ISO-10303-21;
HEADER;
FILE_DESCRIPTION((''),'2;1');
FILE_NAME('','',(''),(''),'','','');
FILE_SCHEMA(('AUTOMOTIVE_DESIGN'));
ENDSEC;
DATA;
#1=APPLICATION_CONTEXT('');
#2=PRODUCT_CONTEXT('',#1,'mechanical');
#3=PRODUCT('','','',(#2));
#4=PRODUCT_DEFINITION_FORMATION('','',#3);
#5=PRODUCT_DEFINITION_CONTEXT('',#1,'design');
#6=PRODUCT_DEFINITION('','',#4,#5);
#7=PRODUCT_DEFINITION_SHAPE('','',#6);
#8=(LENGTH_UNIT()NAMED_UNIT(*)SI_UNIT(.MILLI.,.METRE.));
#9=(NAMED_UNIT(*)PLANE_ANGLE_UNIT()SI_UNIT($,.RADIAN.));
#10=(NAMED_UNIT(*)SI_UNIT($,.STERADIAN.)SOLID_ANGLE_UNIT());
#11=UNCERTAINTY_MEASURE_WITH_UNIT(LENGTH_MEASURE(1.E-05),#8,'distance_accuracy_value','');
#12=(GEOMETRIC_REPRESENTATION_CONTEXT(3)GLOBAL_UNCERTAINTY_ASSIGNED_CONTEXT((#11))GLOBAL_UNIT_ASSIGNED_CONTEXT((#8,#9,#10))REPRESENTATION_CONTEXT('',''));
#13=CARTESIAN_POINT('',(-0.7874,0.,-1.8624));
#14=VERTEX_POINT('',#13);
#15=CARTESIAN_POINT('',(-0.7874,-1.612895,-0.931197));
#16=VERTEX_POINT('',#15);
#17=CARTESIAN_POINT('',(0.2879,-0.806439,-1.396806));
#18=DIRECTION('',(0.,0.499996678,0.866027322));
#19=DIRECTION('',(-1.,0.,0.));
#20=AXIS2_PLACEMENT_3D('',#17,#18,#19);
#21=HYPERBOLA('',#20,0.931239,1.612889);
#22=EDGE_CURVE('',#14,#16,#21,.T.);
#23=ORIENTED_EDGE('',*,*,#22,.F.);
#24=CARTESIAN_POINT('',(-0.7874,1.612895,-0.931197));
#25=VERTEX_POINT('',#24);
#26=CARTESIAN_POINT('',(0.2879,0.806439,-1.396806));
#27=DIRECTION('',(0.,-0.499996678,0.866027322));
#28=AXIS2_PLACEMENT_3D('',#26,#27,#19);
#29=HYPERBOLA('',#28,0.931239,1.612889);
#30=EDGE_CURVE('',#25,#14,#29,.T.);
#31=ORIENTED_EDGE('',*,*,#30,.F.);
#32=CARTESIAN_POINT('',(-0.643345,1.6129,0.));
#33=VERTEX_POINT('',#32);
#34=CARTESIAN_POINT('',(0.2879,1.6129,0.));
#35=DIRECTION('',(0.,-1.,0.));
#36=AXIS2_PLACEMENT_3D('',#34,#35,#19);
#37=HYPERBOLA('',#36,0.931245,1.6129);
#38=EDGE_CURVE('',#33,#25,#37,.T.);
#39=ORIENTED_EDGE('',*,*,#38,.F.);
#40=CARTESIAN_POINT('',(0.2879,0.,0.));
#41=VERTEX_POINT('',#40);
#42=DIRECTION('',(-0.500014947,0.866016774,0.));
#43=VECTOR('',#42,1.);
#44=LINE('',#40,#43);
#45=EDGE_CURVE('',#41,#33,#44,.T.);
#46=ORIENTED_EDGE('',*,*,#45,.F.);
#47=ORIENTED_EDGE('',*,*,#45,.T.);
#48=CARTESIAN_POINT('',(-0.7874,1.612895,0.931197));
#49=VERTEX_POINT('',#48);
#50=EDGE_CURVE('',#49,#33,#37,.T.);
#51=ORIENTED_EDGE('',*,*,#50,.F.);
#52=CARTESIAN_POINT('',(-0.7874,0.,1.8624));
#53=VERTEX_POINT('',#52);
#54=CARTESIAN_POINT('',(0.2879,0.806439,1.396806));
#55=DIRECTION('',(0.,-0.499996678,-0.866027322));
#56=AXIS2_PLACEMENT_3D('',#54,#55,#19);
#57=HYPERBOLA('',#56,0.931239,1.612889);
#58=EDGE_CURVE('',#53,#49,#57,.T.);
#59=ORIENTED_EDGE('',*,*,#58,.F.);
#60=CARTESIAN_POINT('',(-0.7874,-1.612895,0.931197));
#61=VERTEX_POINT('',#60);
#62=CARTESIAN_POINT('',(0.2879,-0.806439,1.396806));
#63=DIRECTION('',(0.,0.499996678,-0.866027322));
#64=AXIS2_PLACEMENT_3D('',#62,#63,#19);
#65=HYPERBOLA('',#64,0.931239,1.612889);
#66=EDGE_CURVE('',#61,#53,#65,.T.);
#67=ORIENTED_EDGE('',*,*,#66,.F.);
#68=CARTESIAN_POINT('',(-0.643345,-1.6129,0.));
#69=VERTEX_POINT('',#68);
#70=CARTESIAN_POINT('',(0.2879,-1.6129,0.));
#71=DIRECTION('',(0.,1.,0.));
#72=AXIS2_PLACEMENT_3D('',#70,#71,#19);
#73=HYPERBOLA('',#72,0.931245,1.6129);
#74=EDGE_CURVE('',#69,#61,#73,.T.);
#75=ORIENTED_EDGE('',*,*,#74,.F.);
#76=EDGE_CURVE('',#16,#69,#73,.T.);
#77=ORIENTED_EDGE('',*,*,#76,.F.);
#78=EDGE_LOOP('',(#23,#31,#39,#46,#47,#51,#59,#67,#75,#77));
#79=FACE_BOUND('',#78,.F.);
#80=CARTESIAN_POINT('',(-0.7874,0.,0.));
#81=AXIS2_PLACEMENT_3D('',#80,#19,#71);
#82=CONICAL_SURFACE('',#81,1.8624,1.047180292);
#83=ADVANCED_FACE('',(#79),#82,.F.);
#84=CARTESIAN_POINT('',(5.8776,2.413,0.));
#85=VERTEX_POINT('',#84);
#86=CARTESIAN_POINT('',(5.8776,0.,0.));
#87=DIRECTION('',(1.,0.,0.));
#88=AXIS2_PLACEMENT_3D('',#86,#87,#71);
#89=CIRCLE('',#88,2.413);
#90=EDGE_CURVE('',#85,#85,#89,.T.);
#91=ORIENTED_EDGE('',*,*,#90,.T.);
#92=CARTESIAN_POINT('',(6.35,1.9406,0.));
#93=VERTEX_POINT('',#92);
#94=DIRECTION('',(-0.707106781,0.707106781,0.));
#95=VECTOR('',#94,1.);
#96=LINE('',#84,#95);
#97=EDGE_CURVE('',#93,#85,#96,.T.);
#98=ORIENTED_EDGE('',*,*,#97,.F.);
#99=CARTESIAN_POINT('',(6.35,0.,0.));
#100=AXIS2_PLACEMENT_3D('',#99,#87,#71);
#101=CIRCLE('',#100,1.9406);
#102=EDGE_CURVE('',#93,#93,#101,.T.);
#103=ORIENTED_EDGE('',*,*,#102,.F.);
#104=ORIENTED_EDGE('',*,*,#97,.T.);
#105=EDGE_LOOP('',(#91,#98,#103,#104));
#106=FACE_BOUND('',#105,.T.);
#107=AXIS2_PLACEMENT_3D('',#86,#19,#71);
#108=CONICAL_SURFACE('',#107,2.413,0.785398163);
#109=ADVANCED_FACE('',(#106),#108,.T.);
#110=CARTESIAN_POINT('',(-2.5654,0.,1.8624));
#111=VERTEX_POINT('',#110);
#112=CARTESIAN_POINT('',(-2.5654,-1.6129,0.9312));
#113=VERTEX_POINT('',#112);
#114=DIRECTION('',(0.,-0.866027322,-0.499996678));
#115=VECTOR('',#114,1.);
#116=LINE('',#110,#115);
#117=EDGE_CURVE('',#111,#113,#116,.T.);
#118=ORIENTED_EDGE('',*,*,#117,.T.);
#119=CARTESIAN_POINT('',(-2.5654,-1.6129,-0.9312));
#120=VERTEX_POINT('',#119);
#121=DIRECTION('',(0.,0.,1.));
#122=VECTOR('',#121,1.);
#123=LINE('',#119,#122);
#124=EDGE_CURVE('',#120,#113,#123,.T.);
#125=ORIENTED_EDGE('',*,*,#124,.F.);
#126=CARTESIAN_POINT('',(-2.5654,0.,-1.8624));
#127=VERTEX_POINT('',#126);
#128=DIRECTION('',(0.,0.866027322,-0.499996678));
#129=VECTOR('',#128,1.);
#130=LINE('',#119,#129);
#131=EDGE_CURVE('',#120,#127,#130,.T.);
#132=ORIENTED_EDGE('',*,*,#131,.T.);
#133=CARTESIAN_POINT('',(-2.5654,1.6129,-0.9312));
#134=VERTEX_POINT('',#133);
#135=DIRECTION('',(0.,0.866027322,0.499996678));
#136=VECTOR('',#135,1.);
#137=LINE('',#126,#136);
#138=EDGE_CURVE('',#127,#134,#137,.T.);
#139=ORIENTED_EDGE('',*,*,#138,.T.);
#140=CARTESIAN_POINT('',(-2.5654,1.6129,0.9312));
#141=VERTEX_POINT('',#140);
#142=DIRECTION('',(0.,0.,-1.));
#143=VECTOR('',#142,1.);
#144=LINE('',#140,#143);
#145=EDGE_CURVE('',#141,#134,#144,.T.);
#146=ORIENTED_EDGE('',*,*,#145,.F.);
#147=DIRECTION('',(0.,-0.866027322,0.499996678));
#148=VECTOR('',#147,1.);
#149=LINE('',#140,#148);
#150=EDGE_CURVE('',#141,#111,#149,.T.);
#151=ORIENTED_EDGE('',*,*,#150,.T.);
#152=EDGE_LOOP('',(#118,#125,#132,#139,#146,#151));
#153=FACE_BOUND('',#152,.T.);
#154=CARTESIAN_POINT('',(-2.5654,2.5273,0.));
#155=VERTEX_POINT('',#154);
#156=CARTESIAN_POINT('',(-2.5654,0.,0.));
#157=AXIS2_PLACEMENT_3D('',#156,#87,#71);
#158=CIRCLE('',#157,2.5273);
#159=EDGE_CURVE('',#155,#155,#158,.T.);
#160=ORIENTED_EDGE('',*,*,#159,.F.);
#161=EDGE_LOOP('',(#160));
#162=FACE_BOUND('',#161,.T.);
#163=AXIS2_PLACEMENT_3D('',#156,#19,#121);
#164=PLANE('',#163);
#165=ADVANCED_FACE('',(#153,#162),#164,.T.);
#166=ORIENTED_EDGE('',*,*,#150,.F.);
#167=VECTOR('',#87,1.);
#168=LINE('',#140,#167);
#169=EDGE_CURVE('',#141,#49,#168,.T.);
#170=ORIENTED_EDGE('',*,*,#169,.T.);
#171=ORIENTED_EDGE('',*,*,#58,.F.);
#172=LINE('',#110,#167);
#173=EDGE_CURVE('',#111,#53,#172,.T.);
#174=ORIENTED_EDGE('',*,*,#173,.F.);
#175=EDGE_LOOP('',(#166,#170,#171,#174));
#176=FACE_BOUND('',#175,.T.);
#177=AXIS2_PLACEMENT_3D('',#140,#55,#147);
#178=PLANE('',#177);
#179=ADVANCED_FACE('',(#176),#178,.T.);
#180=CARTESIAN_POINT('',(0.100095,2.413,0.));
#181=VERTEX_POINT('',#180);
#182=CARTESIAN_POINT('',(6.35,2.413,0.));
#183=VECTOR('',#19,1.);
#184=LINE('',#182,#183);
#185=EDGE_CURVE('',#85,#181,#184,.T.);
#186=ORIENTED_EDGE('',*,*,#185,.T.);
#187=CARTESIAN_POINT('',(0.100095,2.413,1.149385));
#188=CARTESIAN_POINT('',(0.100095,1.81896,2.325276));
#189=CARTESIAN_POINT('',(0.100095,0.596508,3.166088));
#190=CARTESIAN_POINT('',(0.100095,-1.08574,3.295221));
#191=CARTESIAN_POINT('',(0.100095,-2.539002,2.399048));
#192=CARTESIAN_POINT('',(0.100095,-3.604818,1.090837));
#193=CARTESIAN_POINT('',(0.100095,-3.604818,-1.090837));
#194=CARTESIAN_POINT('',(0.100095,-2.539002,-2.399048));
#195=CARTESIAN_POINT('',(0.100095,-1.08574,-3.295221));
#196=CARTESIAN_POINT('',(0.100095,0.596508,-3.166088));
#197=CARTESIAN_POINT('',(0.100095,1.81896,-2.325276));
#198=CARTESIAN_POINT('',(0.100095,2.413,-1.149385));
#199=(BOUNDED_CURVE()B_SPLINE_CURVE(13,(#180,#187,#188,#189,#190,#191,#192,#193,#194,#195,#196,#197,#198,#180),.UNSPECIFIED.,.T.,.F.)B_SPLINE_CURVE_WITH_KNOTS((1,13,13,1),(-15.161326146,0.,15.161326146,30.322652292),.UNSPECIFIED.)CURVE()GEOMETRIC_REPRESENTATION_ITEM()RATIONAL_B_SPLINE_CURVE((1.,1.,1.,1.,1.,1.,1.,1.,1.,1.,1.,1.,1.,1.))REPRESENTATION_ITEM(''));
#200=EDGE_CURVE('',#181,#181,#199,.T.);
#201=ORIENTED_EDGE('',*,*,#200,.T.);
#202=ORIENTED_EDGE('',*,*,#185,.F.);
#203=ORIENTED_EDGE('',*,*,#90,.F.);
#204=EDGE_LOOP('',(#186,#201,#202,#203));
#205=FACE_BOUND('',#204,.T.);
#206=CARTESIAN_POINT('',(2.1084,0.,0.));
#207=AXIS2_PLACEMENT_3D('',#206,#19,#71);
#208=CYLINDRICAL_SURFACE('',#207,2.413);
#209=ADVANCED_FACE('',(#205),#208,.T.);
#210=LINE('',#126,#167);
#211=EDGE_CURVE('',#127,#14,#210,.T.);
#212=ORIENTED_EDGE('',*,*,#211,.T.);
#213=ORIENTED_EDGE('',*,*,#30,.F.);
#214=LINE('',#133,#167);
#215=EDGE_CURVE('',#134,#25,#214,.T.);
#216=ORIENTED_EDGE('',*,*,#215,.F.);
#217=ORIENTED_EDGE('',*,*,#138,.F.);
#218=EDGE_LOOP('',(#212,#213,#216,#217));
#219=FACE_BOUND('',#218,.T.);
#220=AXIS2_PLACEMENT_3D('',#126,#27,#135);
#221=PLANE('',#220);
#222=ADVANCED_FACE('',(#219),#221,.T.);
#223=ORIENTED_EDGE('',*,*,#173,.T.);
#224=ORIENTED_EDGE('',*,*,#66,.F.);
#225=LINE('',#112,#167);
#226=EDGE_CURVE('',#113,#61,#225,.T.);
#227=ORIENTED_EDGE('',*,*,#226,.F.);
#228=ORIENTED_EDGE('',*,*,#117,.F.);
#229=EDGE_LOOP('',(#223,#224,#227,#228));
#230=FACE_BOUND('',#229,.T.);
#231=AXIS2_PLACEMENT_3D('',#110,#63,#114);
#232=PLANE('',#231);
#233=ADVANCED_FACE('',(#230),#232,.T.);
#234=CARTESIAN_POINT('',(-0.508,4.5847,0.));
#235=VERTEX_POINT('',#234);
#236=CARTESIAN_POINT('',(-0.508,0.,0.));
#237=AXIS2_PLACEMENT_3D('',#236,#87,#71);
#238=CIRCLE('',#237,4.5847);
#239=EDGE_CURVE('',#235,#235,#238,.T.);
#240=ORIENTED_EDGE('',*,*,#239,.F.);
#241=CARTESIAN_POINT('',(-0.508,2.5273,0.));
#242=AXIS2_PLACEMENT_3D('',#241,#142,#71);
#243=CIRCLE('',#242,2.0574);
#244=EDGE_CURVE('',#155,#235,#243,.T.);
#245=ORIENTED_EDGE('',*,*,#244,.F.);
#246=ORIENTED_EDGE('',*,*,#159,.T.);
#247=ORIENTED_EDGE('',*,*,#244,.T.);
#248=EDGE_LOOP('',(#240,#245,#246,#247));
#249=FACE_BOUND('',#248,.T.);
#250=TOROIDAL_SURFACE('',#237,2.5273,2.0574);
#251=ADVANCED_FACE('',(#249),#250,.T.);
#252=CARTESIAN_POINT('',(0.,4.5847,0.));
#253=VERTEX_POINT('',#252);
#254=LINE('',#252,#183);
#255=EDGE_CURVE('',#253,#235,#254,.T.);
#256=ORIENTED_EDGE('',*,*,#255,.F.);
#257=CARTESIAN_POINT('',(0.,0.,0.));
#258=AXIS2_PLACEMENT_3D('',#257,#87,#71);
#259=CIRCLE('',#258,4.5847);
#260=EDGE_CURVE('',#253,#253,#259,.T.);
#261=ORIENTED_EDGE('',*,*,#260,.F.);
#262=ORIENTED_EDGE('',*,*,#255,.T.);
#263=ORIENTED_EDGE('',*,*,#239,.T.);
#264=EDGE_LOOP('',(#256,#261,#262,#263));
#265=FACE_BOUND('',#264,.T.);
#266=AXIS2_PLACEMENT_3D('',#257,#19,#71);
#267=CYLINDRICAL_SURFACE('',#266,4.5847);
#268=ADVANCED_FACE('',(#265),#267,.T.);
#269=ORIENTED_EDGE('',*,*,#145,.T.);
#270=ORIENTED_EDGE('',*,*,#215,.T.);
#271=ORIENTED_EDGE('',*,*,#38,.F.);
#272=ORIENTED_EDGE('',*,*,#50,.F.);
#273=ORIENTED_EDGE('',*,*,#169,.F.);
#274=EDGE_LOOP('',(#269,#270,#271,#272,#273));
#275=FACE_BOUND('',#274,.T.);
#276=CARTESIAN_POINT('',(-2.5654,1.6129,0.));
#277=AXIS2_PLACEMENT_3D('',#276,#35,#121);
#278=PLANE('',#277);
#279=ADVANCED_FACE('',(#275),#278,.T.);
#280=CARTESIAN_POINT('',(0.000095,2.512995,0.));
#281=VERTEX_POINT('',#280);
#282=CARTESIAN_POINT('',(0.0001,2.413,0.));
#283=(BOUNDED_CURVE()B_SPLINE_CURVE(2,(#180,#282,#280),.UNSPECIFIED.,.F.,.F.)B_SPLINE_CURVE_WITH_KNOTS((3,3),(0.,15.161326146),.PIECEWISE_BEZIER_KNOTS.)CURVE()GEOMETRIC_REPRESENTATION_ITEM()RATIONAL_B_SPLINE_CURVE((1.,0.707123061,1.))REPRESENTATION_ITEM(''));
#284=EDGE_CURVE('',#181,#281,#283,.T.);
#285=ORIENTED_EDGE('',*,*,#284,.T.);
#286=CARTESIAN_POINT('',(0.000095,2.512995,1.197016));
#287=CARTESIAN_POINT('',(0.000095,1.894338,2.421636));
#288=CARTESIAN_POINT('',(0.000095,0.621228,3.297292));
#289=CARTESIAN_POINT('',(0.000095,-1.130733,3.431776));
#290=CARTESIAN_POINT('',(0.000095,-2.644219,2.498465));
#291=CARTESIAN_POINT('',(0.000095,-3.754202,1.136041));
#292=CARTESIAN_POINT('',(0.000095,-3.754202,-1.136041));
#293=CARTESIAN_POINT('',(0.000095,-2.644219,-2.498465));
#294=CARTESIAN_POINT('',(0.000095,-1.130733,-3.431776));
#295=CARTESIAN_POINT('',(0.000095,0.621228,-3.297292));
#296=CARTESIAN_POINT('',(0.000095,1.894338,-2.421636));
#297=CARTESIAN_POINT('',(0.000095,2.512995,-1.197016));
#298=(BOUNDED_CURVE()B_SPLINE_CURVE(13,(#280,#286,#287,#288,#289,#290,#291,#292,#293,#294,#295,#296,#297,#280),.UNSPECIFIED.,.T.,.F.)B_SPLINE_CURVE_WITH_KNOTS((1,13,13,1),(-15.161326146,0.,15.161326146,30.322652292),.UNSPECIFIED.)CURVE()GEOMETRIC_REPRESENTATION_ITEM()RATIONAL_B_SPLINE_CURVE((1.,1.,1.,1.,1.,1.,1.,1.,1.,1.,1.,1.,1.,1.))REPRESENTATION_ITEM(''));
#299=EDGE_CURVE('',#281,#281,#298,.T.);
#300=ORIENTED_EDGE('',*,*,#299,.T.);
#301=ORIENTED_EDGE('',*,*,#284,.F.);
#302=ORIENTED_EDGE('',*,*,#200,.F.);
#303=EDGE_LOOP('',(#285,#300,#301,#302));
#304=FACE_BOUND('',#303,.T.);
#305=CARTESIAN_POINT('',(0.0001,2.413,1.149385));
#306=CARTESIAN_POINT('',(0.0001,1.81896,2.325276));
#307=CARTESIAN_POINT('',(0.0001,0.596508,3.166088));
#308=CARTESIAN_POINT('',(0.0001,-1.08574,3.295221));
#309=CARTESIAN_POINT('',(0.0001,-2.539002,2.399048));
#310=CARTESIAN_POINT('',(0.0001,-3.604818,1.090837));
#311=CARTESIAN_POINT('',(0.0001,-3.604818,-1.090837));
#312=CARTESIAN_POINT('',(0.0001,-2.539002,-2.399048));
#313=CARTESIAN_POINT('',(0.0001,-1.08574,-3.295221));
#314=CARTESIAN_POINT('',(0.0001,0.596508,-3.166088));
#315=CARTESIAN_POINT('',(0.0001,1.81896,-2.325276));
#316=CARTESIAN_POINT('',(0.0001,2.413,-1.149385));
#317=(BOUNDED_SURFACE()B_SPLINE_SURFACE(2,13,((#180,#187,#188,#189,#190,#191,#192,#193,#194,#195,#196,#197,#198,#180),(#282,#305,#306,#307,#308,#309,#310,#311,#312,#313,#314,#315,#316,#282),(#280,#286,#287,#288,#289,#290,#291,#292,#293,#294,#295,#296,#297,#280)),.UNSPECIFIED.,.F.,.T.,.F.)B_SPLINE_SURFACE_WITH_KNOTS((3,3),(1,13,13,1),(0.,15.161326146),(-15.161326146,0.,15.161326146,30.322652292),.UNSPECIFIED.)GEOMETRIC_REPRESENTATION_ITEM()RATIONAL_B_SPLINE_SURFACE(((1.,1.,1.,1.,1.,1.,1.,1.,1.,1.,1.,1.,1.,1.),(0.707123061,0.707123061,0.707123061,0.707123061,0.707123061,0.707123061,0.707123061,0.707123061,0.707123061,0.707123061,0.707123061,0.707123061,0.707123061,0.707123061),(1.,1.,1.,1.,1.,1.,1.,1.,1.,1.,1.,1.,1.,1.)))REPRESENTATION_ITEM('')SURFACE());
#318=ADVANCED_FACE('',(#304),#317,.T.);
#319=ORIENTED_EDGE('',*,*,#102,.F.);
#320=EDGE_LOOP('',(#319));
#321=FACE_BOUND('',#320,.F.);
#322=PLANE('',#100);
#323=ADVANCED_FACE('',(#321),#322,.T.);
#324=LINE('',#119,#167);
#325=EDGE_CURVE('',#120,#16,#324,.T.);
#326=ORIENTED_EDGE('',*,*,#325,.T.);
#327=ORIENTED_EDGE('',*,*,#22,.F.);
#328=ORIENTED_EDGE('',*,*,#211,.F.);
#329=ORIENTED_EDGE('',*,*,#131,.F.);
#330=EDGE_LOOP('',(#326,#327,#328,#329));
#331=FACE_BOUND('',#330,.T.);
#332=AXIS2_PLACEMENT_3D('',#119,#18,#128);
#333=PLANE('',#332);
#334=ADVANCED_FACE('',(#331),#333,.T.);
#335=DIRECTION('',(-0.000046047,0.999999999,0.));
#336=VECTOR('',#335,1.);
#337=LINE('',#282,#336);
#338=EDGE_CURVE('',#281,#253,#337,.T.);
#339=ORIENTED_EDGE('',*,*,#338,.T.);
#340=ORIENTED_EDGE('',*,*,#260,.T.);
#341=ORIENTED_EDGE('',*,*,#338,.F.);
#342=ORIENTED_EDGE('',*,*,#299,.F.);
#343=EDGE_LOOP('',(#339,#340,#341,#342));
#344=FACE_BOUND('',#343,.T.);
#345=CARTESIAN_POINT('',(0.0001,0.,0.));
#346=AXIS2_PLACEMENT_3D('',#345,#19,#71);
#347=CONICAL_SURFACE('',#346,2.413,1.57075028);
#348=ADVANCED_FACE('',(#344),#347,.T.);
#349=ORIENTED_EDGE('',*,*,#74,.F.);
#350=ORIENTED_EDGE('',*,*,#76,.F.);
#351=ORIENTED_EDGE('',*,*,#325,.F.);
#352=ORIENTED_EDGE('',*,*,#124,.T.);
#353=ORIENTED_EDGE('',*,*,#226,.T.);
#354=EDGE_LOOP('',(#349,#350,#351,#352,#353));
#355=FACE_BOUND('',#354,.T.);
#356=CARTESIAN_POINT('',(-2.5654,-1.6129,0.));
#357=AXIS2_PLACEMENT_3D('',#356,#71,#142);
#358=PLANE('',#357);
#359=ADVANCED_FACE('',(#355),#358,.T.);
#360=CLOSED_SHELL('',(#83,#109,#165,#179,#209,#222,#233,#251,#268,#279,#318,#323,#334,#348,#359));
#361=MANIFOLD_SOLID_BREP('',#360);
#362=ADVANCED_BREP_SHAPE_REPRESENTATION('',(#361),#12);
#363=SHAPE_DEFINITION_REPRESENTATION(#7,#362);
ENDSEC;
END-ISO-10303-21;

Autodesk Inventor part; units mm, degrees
ref_plane "YZ Plane" through (0, 0, 0) normal (1, 0, 0) x (0, 1, 0)
ref_plane "XZ Plane" through (0, 0, 0) normal (0, 1, 0) x (-1, 0, 0)
sketch "Sketch1" plane through (0, 0, 0) normal (0, 0, 1) x (1, 0, 0)
  line L0 (0.2879, 0) -> (6.35, 0)
  line L1 (6.35, 0) -> (6.35, 2.413)
  line L2 (6.35, 2.413) -> (2.1084, 2.413)
  line L3 (2.1084, 2.413) -> (0.0001, 2.413)
  line L4 (0.0001, 2.413) -> (0, 2.413)
  line L5 (0, 2.413) -> (0, 4.5847)
  line L6 (0, 4.5847) -> (-2.5654, 4.5847)
  line L7 (-2.5654, 4.5847) -> (-2.5654, 1.8624)
  line L8 (-2.5654, 1.8624) -> (-0.7874, 1.8624)
  line L9 (-0.7874, 1.8624) -> (0.2879, 0)
  line L10 (-4.3485, 0) -> (8.1331, 0) projected
  line L11 (0, -0.9169) -> (0, 5.5016) projected
  line L12 (2.1084, 2.413) -> (0, 2.413) construction
  dimension "d1" = 4.2416
  dimension "d2" = 2.1083
  dimension "d3" = 2.5654
  dimension "d4" = 1.778
  dimension "d5" = 60
  dimension "d6" = 4.826
  dimension "d7" = 4.826
  dimension "d8" = 3.7248
  dimension "d9" = 9.1694
  dimension "d26" = 6.35
revolve "Body" add sketch "Sketch1" angle 360 about axis through (0.2879, 0, 0) along (1, 0, 0) contours L9 L11 L3 L2 L1 L0 | L9 L8 L7 L6 L5 L11
sketch "Sketch2" plane through (-2.5654, 0, 0) normal (-1, 0, 0) x (0, 0, 1)
  circle A0 centre (0, 0) radius 1.8624 projected
  line L0 (0, -6.4186) -> (0, 6.4186) projected
  line L1 (-6.4186, 0) -> (6.4186, 0) projected
  line L2 (1.8624, 0) -> (0.9312, -1.6129)
  line L3 (0.9312, -1.6129) -> (-0.9312, -1.6129)
  line L4 (-0.9312, -1.6129) -> (-1.8624, 0)
  line L5 (-1.8624, 0) -> (-0.9312, 1.6129)
  line L6 (-0.9312, 1.6129) -> (0.9312, 1.6129)
  line L7 (0.9312, 1.6129) -> (1.8624, 0)
  point P0 (0, 0)
extrude "Slot" add sketch "Sketch2" against normal up to next contours L7 A0 | A0 L2 | L6 L0 A0 | A0 L0 L3 | L0 L6 A0 | A0 L3 L0 | L4 A0 | A0 L5
fillet "Fillet1" radius 2.0574 1 edges at (-2.5654, -4.5847, 0)
thread "Thread" size "10-32 UNF" class "2A" standard "ANSI Unified Screw Threads" length 4.2416
chamfer "Chamfer1" distance 0.4724 distance2 0.4724 1 edges at (6.35, -2.413, 0) measured on face at (6.35, -0.2686, 0.7084)
ref_plane "Work Plane1" through (29, 0, 0) normal (0, -1, 0) x (1, 0, 0)
fillet "Fillet2" radius 0.1 1 edges at (0.0001, -2.413, 0)
equation "\"d30\" = R"
equation "\"d17\" = RR"
equation "\"d13\" = GEL"
equation "\"d15\" = -0.5 * SPD + 0.5 * GD"
equation "\"d16\" = GUL"
equation "\"d1\" = GEL"
equation "\"d3\" = KOH"
equation "\"d4\" = INTI"
equation "\"d6\" = GD"
equation "\"d7\" = BDM"
equation "\"d8\" = 1.1547 * SW"
equation "\"d9\" = KOD"
equation "\"d26\" = NLG"
equation "\"GD\" = NND"
equation "\"NLG\" = 6.35"
equation "\"GEL\" = 4.2416"
equation "\"KOD\" = 9.1694"
equation "\"KOH\" = 2.5654"
equation "\"INTI\" = 1.778"
equation "\"GAL\" = 2.1082"
equation "\"GUL\" = 0.47244"
equation "\"BDM\" = NND"
equation "\"SW\" = 3.2258"
equation "\"RR\" = 2.0574"
equation "\"SPD\" = 3.88112"
equation "\"R\" = 0.1"
equation "\"TOA\" = 30deg"
equation "\"GD1\" = SPD"
equation "\"THREADDIA\" = 4.826"
equation "\"KOH1\" = 0.508"
equation "\"NND\" = 4.826"
equation "\"E0\" = 3.72593"
properties part number "ANSI B18.3 - No. 10-32 - 1/4, HSBHCSI" material "Steel, Mild"
